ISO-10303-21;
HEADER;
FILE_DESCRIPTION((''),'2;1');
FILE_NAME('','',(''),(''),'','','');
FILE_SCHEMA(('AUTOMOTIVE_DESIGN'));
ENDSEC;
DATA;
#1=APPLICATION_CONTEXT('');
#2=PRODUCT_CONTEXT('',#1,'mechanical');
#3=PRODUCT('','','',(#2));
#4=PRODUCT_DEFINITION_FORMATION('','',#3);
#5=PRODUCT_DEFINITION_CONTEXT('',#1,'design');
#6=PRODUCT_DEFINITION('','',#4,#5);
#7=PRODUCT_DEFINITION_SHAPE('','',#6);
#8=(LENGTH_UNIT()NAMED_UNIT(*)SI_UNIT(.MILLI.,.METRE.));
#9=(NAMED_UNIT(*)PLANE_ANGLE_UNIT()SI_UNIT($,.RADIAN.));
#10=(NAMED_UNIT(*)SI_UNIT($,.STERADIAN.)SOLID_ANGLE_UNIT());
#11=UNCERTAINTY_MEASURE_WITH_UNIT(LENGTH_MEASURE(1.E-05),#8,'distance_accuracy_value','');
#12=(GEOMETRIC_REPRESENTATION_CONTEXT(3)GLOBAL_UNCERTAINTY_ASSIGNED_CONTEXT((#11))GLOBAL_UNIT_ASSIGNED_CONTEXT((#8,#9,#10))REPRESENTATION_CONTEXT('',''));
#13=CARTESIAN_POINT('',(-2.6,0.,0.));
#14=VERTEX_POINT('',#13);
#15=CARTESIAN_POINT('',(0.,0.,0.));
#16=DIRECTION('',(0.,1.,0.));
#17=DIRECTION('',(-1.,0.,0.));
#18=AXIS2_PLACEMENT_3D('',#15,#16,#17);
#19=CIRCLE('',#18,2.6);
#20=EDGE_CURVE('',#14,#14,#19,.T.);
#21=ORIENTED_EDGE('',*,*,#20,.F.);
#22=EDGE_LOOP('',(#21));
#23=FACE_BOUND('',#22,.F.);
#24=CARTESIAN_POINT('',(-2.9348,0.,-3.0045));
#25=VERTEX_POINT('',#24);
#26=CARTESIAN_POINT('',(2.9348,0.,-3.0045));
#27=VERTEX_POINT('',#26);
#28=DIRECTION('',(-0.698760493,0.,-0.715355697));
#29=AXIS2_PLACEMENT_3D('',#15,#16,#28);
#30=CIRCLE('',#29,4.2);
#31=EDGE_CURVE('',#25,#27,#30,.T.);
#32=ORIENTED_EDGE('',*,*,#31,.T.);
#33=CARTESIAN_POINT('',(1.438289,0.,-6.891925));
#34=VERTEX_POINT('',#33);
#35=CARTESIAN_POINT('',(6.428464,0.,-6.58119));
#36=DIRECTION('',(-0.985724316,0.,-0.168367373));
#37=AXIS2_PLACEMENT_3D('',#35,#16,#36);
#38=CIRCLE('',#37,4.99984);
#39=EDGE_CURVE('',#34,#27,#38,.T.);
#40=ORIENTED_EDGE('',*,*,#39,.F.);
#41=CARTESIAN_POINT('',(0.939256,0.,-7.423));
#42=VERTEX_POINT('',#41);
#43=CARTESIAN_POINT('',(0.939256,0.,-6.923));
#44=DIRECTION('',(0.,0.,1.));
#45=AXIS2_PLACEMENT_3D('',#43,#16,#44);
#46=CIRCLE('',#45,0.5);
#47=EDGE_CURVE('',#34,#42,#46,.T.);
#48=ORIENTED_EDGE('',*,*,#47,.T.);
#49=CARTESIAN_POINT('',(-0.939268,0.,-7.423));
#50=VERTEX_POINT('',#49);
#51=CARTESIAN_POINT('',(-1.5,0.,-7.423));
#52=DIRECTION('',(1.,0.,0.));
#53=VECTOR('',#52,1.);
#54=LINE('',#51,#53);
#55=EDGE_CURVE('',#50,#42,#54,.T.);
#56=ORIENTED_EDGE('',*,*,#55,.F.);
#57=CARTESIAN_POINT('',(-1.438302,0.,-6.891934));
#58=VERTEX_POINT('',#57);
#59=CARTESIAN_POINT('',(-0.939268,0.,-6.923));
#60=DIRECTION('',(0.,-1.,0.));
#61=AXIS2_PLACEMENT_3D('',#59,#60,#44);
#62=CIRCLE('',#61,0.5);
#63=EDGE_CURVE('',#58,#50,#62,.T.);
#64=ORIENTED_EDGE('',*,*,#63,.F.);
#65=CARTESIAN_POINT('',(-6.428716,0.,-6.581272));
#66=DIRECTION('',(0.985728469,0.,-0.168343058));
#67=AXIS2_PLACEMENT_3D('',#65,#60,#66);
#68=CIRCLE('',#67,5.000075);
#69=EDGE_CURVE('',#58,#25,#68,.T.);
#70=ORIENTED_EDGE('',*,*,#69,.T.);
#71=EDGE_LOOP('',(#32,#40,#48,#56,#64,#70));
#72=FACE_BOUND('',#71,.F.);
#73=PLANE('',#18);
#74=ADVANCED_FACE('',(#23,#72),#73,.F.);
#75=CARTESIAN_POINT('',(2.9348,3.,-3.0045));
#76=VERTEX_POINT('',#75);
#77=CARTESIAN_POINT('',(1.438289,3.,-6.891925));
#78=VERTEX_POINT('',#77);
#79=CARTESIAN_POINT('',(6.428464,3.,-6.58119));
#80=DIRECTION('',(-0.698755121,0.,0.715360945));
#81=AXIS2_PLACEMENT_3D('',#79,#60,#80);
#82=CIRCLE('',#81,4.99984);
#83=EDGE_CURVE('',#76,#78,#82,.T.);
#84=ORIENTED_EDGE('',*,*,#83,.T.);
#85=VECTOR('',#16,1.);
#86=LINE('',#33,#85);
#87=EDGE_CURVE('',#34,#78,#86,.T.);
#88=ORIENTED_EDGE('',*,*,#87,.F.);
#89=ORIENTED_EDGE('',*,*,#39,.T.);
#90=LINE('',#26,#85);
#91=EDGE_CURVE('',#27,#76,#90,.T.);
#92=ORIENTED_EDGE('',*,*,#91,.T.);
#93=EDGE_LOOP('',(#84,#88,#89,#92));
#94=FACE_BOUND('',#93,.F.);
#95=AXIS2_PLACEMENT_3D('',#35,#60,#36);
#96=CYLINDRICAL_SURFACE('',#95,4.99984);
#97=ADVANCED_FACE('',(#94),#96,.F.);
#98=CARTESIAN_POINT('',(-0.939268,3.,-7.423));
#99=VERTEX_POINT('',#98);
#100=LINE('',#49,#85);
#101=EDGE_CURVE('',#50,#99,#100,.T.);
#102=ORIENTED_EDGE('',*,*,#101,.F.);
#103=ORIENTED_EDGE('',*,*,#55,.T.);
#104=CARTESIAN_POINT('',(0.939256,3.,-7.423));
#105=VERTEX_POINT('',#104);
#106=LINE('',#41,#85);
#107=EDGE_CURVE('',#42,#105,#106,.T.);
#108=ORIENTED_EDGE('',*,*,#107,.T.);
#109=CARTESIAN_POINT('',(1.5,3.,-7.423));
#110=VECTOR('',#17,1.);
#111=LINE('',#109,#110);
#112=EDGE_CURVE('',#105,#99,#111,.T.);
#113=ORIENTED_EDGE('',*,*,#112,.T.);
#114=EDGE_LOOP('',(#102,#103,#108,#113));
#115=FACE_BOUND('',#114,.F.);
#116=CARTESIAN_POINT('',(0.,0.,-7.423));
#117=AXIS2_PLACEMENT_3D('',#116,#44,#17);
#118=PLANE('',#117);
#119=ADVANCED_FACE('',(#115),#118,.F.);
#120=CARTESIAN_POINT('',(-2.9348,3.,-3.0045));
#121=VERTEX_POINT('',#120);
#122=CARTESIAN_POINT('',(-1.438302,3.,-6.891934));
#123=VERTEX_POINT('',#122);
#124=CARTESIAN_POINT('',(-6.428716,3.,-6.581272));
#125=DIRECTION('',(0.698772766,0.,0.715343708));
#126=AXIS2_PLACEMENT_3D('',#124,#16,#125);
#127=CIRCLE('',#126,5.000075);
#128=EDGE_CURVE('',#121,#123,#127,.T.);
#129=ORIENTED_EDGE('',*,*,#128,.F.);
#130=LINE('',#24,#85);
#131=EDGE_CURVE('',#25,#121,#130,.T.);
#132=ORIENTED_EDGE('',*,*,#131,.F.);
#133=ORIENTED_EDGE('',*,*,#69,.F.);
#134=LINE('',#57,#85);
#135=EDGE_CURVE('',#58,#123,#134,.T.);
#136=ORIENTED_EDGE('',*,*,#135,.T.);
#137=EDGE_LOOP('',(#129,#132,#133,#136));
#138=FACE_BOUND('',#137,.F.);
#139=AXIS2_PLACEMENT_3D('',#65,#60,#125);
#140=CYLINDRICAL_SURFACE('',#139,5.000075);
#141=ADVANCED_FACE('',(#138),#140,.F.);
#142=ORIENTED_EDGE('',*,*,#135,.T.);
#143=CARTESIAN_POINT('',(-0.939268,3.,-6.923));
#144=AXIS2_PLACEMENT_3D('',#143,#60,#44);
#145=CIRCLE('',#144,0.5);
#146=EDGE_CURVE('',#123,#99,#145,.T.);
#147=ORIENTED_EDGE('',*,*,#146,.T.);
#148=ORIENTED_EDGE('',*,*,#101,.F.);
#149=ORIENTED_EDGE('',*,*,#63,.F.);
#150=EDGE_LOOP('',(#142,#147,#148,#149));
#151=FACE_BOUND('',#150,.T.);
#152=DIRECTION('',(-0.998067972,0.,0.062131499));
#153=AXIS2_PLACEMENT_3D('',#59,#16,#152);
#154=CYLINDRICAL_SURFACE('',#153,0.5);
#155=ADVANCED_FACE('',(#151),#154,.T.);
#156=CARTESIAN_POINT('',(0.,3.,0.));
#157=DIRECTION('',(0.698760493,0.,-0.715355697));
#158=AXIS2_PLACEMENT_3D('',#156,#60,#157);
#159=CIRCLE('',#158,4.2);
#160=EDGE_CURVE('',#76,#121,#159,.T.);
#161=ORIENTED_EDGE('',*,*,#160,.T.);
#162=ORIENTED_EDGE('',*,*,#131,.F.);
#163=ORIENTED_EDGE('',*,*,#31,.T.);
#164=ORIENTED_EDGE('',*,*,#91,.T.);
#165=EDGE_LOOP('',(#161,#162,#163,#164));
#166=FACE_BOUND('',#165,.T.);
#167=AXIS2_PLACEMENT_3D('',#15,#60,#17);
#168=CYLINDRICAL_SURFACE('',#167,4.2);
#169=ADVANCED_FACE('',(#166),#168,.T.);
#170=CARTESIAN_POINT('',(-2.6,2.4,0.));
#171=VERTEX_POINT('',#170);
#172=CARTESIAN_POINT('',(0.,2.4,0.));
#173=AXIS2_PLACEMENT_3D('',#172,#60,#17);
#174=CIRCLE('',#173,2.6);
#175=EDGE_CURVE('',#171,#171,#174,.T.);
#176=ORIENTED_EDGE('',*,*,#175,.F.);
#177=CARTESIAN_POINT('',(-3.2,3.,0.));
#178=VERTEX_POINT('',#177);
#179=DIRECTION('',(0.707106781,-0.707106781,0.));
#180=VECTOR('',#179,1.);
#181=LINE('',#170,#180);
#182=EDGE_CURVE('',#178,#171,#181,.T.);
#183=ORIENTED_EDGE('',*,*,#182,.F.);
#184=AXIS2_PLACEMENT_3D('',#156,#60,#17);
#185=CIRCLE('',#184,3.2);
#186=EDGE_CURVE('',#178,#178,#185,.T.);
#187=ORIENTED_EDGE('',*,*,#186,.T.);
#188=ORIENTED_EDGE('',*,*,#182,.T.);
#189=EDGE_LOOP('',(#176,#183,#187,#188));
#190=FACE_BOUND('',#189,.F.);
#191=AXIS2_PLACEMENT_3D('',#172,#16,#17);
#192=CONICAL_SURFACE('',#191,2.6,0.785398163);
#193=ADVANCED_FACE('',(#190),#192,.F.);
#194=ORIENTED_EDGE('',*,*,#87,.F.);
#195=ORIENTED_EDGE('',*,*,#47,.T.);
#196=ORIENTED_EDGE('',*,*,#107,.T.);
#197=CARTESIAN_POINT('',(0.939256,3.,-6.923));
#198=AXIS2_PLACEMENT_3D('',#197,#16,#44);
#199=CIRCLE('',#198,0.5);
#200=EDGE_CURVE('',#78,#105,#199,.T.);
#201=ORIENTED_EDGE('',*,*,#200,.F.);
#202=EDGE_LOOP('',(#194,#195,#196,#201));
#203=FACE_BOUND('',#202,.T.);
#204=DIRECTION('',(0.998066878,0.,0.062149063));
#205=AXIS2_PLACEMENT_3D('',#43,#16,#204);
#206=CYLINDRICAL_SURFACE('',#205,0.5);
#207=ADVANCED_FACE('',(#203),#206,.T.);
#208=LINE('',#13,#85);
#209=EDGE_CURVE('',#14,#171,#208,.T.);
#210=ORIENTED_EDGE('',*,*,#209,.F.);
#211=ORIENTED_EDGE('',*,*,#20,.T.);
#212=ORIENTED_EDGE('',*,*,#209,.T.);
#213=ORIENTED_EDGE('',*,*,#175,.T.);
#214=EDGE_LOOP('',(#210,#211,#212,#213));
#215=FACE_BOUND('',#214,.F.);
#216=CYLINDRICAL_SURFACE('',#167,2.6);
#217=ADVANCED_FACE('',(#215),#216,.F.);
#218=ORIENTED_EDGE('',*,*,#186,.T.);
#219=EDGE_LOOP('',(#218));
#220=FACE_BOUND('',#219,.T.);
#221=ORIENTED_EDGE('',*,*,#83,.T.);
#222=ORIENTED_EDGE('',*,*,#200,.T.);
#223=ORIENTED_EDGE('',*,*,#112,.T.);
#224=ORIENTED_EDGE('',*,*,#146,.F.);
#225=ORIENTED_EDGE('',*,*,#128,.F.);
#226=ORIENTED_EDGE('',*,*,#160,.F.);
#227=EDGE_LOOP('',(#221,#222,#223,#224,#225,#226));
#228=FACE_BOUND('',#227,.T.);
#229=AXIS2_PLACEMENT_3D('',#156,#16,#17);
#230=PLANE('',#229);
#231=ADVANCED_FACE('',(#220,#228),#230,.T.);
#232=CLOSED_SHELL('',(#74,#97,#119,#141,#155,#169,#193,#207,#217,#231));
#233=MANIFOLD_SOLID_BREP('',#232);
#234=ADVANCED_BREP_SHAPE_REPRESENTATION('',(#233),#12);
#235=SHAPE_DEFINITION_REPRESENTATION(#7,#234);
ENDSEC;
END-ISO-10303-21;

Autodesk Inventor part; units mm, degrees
ref_plane "YZ Plane" through (0, 0, 0) normal (1, 0, 0) x (0, 1, 0)
ref_plane "XZ Plane" through (0, 0, 0) normal (0, 1, 0) x (-1, 0, 0)
ref_plane "XY Plane" through (0, 0, 0) normal (0, 0, 1) x (1, 0, 0)
sketch "Sketch1" plane through (0, 0, 0) normal (0, 1, 0) x (-1, 0, 0)
  circle A0 centre (0, 0) radius 2.6
  circle A1 centre (0, 0) radius 4.2
  line L0 (1.5, -3.923) -> (-1.5, -3.923)
  line L1 (-1.5, -3.923) -> (-1.5, -7.423)
  line L2 (-1.5, -7.423) -> (1.5, -7.423)
  line L3 (1.5, -7.423) -> (1.5, -3.923)
  line L4 (0, 0) -> (0, -7.423)
  arc A2 (2.9348, -3.0045) -> (1.5, -7.423) centre (6.4286, -6.5812) ccw
  arc A3 (-1.5, -7.423) -> (-2.9348, -3.0045) centre (-6.4286, -6.5812) ccw
  point P0 (1.5, -7.423)
  point P1 (-1.5, -5.7395)
  dimension "d0" = 5.2
  dimension "d1" = 1.6
  dimension "d2" = 1.5
  dimension "d3" = 3.5
  dimension "d4" = 5
  dimension "d6" = 5
extrude "Extrusion1" add sketch "Sketch1" along normal blind 3 contours A1 L0 | A1 L1 A3 | A2 L3 A1 | L0 L4 A1 | A1 L4 L2 A3 L1 | L3 A2 L2 L4 A1 | A1 L4 L0
fillet "Fillet2" radius 0.5 2 edges at (1.5, 1.5, -7.423) (-1.5, 1.5, -7.423)
chamfer "Chamfer1" distance 0.6 angle 45 1 edges at (2.6, 3, 0)
equation "\"d0\" = d"
equation "\"d6\" = d4"
equation "\"d7\" = dep"
equation "\"d\" = 5.2"
equation "\"dep\" = 3"
properties part number "thumbscrew_converter_M3"
